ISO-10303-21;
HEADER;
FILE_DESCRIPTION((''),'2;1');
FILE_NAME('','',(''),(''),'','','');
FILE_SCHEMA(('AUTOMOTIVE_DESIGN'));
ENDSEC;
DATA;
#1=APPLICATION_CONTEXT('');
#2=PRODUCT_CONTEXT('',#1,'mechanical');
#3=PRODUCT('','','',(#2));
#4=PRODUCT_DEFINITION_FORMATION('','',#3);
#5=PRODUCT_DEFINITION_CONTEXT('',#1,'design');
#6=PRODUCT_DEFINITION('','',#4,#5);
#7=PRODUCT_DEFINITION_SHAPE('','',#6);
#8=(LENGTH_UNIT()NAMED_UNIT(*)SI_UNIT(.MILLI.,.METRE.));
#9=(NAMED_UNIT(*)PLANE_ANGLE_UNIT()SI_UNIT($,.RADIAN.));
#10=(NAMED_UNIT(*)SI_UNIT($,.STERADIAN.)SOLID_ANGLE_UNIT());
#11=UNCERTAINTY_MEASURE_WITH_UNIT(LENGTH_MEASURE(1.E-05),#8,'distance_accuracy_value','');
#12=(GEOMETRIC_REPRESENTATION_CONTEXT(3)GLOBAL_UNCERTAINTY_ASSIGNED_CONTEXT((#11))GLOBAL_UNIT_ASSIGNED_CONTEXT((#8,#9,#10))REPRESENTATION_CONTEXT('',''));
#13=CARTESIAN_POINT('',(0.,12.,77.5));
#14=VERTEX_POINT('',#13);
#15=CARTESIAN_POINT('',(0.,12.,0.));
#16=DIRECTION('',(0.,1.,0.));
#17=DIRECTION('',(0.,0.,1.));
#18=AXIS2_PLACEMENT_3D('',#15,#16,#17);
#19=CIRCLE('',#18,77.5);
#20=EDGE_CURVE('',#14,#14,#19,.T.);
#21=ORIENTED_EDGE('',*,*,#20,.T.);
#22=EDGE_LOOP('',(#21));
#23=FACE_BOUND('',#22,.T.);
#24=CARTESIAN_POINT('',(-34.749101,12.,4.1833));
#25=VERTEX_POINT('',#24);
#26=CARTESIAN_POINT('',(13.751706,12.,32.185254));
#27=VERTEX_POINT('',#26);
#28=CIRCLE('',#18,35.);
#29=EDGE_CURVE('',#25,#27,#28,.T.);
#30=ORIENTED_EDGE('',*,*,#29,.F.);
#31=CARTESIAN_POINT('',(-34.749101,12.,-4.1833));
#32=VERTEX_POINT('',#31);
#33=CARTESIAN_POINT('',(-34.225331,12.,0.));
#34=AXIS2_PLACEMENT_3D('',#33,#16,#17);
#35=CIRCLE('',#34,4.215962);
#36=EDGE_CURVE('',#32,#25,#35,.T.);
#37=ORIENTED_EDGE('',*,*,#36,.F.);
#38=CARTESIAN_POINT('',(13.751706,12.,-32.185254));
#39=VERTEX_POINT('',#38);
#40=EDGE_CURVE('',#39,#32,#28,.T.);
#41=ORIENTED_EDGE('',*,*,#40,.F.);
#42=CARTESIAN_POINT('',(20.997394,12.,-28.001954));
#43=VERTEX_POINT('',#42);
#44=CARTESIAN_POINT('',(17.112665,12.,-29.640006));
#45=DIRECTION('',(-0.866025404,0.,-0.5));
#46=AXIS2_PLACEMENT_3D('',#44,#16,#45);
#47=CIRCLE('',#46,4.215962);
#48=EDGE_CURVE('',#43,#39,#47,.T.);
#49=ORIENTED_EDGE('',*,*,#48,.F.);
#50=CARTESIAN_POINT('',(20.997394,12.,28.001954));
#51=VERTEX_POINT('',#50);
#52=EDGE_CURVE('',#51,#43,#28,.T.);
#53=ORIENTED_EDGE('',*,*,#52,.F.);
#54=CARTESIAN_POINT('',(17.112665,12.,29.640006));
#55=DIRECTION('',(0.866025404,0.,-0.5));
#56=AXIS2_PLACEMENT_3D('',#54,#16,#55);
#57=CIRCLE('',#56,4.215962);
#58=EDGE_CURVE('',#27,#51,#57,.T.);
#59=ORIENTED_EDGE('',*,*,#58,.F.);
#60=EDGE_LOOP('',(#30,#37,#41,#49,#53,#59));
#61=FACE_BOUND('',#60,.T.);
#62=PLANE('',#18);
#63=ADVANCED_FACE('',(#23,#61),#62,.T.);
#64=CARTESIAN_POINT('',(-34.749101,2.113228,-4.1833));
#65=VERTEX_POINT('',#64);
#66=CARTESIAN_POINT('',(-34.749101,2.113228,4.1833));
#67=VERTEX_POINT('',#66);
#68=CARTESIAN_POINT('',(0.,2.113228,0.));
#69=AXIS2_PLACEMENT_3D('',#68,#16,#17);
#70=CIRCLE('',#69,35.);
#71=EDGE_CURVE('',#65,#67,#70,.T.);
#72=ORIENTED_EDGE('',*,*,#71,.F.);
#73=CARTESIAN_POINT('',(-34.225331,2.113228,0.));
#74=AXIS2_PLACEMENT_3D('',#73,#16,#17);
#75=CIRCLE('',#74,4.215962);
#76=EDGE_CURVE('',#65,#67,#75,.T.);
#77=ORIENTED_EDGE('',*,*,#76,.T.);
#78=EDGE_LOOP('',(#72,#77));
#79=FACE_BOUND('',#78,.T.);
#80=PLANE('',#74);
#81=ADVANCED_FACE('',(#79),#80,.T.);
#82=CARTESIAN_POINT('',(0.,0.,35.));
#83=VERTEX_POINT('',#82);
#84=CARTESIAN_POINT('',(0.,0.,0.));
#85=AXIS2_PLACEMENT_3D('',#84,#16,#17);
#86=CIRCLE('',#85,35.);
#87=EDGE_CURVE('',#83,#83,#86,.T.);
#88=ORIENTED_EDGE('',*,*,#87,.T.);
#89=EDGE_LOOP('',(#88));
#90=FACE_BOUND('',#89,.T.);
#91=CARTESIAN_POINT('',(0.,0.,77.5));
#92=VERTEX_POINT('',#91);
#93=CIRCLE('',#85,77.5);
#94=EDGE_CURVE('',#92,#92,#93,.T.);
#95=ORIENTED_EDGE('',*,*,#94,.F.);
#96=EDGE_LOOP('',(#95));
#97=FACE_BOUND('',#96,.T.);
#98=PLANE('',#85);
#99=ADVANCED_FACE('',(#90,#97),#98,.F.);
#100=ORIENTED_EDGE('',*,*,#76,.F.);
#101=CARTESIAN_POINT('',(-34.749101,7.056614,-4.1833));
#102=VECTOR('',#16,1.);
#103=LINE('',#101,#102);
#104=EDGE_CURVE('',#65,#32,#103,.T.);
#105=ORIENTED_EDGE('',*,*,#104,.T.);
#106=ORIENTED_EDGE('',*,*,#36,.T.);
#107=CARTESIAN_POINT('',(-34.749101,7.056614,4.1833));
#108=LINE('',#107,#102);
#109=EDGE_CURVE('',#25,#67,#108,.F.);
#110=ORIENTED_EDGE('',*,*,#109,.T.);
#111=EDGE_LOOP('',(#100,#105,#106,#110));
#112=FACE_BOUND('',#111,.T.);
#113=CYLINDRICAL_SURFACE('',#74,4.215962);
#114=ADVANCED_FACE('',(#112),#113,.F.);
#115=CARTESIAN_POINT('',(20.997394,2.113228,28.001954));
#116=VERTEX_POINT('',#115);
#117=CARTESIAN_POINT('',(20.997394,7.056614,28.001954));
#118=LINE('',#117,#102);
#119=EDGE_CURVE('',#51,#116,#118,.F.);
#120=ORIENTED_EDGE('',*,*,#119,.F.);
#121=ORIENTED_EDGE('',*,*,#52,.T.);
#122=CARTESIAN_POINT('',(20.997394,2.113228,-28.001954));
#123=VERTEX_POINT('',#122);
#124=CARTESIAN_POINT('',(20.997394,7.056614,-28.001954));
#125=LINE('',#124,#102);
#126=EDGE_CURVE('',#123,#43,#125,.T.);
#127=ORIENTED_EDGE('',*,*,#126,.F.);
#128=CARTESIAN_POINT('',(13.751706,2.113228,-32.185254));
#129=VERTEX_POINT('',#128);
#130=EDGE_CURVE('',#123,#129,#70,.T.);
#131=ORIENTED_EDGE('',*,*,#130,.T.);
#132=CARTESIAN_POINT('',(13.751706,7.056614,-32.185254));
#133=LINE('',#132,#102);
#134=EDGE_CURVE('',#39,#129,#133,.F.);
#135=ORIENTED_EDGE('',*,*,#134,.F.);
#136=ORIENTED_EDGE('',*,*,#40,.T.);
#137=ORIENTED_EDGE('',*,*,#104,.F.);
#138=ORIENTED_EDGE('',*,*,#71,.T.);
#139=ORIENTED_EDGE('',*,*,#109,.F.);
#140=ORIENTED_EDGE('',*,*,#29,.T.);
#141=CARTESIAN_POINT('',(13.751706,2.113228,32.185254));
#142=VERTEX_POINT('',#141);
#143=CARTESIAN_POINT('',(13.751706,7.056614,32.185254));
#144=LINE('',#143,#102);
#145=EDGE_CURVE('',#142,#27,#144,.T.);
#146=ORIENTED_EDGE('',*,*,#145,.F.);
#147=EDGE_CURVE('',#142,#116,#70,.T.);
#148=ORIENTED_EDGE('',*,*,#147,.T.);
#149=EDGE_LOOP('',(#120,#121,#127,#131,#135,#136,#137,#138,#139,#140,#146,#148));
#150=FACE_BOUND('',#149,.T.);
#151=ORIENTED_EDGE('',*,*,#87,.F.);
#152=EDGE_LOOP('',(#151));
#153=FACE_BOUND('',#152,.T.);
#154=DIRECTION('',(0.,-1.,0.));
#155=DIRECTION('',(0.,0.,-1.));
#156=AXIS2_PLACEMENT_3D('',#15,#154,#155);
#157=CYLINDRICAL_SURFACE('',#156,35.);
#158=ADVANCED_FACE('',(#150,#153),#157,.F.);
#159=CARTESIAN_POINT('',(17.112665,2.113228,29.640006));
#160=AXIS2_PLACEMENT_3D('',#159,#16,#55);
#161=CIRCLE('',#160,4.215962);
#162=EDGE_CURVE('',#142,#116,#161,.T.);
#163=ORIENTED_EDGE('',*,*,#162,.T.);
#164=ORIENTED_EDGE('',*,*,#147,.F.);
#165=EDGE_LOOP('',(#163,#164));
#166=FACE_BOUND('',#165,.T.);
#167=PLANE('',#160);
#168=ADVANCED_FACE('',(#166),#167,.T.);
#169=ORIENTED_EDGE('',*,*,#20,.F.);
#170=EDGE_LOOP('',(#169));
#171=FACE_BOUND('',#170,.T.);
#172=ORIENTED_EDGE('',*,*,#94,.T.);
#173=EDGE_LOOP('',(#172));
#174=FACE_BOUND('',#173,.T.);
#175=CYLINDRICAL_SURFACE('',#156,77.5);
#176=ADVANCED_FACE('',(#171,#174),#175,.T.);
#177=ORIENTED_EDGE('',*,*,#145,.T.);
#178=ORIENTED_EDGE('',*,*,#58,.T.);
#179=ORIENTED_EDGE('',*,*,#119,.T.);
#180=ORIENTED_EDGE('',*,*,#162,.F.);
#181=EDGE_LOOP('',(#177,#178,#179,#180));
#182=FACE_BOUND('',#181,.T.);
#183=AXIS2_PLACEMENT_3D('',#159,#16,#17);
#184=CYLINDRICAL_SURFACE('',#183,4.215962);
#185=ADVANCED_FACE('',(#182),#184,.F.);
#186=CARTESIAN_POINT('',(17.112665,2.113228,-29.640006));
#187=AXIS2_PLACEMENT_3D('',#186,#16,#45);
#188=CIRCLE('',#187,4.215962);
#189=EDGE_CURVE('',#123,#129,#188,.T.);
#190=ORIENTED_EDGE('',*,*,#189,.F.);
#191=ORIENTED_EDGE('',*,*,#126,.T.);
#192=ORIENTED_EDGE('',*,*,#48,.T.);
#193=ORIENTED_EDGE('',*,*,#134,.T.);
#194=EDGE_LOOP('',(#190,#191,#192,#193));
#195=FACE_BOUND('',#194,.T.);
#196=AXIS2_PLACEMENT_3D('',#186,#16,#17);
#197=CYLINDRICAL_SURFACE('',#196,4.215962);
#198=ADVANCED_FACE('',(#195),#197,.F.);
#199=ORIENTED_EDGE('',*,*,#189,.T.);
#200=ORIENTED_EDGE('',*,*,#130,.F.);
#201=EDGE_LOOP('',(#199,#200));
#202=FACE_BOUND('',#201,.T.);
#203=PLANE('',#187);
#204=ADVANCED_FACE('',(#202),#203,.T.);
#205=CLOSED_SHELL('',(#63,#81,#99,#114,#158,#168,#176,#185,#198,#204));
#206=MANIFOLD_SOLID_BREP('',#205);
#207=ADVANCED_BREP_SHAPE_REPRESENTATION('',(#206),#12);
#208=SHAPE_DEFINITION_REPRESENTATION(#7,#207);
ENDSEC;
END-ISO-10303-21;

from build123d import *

# Parameters (mm, degrees)
SKETCH1_R           = 77.5
BOSS_EXTRUDE1_DEPTH = 12
SKETCH2_R           = 35
CUT_EXTRUDE1_DEPTH  = 111.256519082
SKETCH3_R           = 4.215961695
CUT_EXTRUDE2_DEPTH  = 9.886772192
CIRPATTERN1_COUNT   = 3


with BuildPart() as part:
    # Sketch1 → Boss-Extrude1 (new body)
    with BuildSketch(Plane(origin=(0, 0, 0), x_dir=(1, 0, 0), z_dir=(0, 1, 0))):
        Circle(SKETCH1_R)
    extrude(amount=BOSS_EXTRUDE1_DEPTH)

    # Sketch2 → Cut-Extrude1 (cut, through all)
    with BuildSketch(Plane(origin=(0, 0, 0), x_dir=(1, 0, 0), z_dir=(0, 1, 0))):
        Circle(SKETCH2_R)
    extrude(amount=CUT_EXTRUDE1_DEPTH, mode=Mode.SUBTRACT)

    # Sketch3 → Cut-Extrude2 (cut)
    with BuildSketch(Plane(origin=(0, 12, 0), x_dir=(1, 0, 0), z_dir=(0, 1, 0))):
        with Locations((-34.225330754, 0)):
            Circle(SKETCH3_R)
    cut_extrude2 = extrude(amount=-CUT_EXTRUDE2_DEPTH, mode=Mode.SUBTRACT)

    # CirPattern1: Cut-Extrude2 ×3 about axis
    cirpattern1_axis = Axis((0, 0, 0), (0, 1, 0))
    for i in range(1, CIRPATTERN1_COUNT):
        add(cut_extrude2.rotate(cirpattern1_axis, i * 360 / CIRPATTERN1_COUNT), mode=Mode.SUBTRACT)


solid = part.part
